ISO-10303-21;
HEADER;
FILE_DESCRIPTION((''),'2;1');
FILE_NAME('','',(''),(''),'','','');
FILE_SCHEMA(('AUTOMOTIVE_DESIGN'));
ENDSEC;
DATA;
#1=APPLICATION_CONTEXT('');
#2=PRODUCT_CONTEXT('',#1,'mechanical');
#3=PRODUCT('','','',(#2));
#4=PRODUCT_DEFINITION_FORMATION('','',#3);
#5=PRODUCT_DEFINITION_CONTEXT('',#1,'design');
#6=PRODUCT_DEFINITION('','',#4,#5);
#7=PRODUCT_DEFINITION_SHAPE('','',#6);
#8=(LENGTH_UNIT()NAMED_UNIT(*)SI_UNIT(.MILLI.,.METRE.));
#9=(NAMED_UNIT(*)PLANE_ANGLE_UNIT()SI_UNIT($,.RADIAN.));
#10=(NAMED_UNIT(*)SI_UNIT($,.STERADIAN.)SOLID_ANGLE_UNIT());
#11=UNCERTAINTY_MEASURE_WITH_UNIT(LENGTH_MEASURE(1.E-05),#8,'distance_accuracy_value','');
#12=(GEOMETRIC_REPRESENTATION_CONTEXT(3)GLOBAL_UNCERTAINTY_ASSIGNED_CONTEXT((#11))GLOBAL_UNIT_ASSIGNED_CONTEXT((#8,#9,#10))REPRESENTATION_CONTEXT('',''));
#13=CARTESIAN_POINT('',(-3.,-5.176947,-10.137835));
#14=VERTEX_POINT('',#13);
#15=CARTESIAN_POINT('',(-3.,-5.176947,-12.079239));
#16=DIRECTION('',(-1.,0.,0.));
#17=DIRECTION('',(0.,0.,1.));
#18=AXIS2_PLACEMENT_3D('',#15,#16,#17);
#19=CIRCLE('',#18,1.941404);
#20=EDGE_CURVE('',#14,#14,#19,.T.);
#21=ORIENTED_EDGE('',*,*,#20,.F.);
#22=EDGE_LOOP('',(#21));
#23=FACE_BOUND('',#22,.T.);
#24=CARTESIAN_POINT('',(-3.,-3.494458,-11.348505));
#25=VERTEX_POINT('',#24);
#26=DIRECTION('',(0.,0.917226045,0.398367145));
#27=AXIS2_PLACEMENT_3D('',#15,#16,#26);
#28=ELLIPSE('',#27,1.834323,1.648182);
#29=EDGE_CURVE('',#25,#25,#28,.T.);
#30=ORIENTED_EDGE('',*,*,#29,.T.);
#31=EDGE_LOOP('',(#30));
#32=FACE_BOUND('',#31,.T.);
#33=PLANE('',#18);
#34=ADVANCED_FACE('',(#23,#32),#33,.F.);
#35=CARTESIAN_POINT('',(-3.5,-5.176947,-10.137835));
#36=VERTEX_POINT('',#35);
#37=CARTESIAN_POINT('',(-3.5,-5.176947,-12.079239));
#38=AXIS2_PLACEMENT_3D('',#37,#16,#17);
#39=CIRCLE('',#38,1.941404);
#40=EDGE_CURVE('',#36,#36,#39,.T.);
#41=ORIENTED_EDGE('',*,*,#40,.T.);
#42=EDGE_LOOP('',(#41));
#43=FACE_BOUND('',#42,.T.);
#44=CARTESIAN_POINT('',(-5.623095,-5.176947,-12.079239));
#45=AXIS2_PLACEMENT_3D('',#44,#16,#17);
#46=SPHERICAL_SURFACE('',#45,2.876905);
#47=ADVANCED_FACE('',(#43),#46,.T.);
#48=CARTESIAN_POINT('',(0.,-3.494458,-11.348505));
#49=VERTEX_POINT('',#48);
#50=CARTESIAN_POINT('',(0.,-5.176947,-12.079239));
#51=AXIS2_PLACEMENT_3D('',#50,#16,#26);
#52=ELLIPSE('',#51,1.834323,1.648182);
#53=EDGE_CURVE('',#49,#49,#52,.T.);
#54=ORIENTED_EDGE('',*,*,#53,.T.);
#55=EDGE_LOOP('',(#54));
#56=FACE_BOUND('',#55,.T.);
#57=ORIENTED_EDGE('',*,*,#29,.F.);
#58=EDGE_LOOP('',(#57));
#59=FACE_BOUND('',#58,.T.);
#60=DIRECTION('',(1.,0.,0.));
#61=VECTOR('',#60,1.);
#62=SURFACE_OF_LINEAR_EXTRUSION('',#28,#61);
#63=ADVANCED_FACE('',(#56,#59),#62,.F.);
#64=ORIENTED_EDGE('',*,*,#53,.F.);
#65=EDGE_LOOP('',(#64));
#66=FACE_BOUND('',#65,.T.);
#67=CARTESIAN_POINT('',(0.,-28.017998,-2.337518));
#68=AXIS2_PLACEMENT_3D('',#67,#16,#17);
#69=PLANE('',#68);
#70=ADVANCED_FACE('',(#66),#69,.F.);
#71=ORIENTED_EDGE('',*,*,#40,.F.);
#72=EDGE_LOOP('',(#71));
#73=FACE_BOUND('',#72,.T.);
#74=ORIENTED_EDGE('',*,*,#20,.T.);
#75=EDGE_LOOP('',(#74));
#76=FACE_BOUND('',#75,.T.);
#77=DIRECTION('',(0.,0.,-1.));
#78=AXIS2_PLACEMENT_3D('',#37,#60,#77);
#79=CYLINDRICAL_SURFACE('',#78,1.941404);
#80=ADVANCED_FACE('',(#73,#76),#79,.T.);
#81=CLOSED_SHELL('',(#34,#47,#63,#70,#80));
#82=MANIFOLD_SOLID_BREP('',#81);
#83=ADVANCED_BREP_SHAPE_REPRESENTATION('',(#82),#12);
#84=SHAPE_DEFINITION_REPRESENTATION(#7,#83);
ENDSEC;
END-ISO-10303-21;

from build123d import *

# Parameters (mm, degrees)
BOSS_EXTRUDE1_DEPTH = 4
CUT_EXTRUDE3_START  = -10
CUT_EXTRUDE3_DEPTH  = 10
CUT_EXTRUDE4_DEPTH  = 10
FILLET4_START       = -1
FILLET4_DEPTH       = 6
SKETCH7_RX          = 1.83432271
SKETCH7_RY          = 1.648181576
BOSS_EXTRUDE2_DEPTH = 3
SKETCH8_R           = 1.941403724
BOSS_EXTRUDE3_DEPTH = 0.5
CUT_EXTRUDE5_DEPTH  = 5
CUT_EXTRUDE6_DEPTH  = 10


with BuildPart() as part:
    # Sketch1 → Boss-Extrude1 (new body)
    with BuildSketch(Plane(origin=(0, 0, 0), x_dir=(0, 0, -1), z_dir=(1, 0, 0))):
        with BuildLine():
            Line((6.442518848, 0), (13.409619329, 0))
            ThreePointArc((13.409619329, 0), (16.945153235, -1.464466094), (18.409619329, -5))
            Line((18.409619329, -5), (18.409619329, -20.34540211))
            ThreePointArc((18.409619329, -20.34540211), (16.945153235, -23.880936016), (13.409619329, -25.34540211))
            Line((13.409619329, -25.34540211), (6.442518848, -25.34540211))
            ThreePointArc((6.442518848, -25.34540211), (2.906984942, -23.880936016), (1.442518848, -20.34540211))
            Line((1.442518848, -20.34540211), (1.442518848, -5))
            ThreePointArc((1.442518848, -5), (2.906984942, -1.464466094), (6.442518848, 0))
        make_face()
    extrude(amount=BOSS_EXTRUDE1_DEPTH)

    # Sketch2 → Cut-Extrude3 (cut)
    with BuildSketch(Plane(origin=(4, 0, 0), x_dir=(0, 0, -1), z_dir=(1, 0, 0)).offset(CUT_EXTRUDE3_START)):
        with BuildLine():
            add(Edge.make_bspline(
                [(2.42884403, -23.286077848), (2.370716158, -22.573896831), (4.185530255, -21.12926271), (4.874517164, -17.962112227), (7.118988975, -13.802662727), (6.544049448, -7.530329658), (1.569055746, -5.349803368), (1.58046752, -3.833613753)],
                knots=[0.531334438, 0.531334438, 0.531334438, 0.531334438, 0.570400737, 0.608236932, 0.680812242, 0.778589658, 0.857107486, 0.857107486, 0.857107486, 0.857107486], degree=3))
            ThreePointArc((1.58046752, -3.833613753), (1.47712578, -4.412742239), (1.442518848, -5))
            Line((1.442518848, -5), (1.442518848, -20.34540211))
            ThreePointArc((1.442518848, -20.34540211), (1.683757797, -21.87974016), (2.384196149, -23.266021372))
            add(Edge.make_bspline(
                [(2.384196149, -23.266021372), (2.399070873, -23.272759012), (2.413953527, -23.279444568), (2.428844038, -23.286077844)],
                knots=[0.998981394, 0.998981394, 0.998981394, 0.998981394, 0.999513034, 0.999513034, 0.999513034, 0.999513034], degree=3))
        make_face()
        with BuildLine():
            Line((13.409619329, 0), (9.46398266, 0))
            add(Edge.make_bspline(
                [(9.46398266, 0), (11.207503001, -0.168664697), (14.40943711, -0.885845558), (18.093070912, -5.600973008), (14.034927819, -11.50687924), (8.23474836, -15.211494887), (7.662204752, -25.591568315), (4.542739971, -24.937885151)],
                knots=[0, 0, 0, 0, 0.077946221, 0.143334379, 0.228662798, 0.345497184, 0.490655992, 0.490655992, 0.490655992, 0.490655992], degree=3))
            add(Edge.make_bspline(
                [(4.54273997, -24.937885153), (5.749127141, -25.532851997), (7.208451258, -25.09277451), (8.521498661, -25.334156754), (8.57622256, -25.34540211)],
                knots=[0.001400322, 0.001400322, 0.001400322, 0.001400322, 0.038459748, 0.040079073, 0.040079073, 0.040079073, 0.040079073], degree=3))
            Line((8.57622256, -25.34540211), (13.409619329, -25.34540211))
            ThreePointArc((13.409619329, -25.34540211), (16.945153235, -23.880936016), (18.409619329, -20.34540211))
            Line((18.409619329, -20.34540211), (18.409619329, -5))
            ThreePointArc((18.409619329, -5), (16.945153235, -1.464466094), (13.409619329, 0))
        make_face()
        with BuildLine():
            ThreePointArc((2.906984942, -1.464466094), (4.529101686, -0.380602337), (6.442518848, 0))
            add(Edge.make_bspline(
                [(6.442518848, 0), (7.443592251, 0.121124965), (8.454170968, 0.097687179), (9.46398266, 0)],
                knots=[0.954855127, 0.954855127, 0.954855127, 0.954855127, 1, 1, 1, 1], degree=3))
            Line((9.46398266, 0), (13.409619329, 0))
            ThreePointArc((13.409619329, 0), (16.945153235, -1.464466094), (18.409619329, -5))
            Line((18.409619329, -5), (18.409619329, -20.34540211))
            ThreePointArc((18.409619329, -20.34540211), (16.945153235, -23.880936016), (13.409619329, -25.34540211))
            Line((13.409619329, -25.34540211), (8.57622256, -25.34540211))
            add(Edge.make_bspline(
                [(8.57622256, -25.34540211), (10.509849295, -25.742748085), (21.004932545, -37.507061135), (40.108036136, 7.046689321), (11.067178354, 5.045725954), (-13.182357735, 4.105959789), (-4.736766595, -20.04051671), (2.384196149, -23.266021372)],
                knots=[0.040079073, 0.040079073, 0.040079073, 0.040079073, 0.09729665, 0.409886449, 0.593670055, 0.744469586, 0.998981394, 0.998981394, 0.998981394, 0.998981394], degree=3))
            ThreePointArc((2.384196149, -23.266021372), (1.683757797, -21.87974016), (1.442518848, -20.34540211))
            Line((1.442518848, -20.34540211), (1.442518848, -5))
            ThreePointArc((1.442518848, -5), (1.47712578, -4.412742239), (1.58046752, -3.833613753))
            add(Edge.make_bspline(
                [(1.58046752, -3.833613753), (1.586363874, -3.050213083), (2.186842654, -2.121305338), (2.906984942, -1.464466094)],
                knots=[0.857107486, 0.857107486, 0.857107486, 0.857107486, 0.897676897, 0.897676897, 0.897676897, 0.897676897], degree=3))
        make_face()
    extrude(amount=CUT_EXTRUDE3_DEPTH, mode=Mode.SUBTRACT)

    # Sketch6 → Cut-Extrude4 (cut)
    with BuildSketch(Plane(origin=(4, 0, 0), x_dir=(0, 0, -1), z_dir=(1, 0, 0))):
        with BuildLine():
            add(Edge.make_bspline(
                [(6.876629539, -24.646378986), (6.348652857, -24.697603605), (5.705170416, -25.181041107), (2.967179599, -24.643973727), (6.798679283, -26.524715176), (10.198220508, -25.437781208), (7.742791771, -24.562343399), (6.876629539, -24.646378986)],
                knots=[0, 0, 0, 0, 0.142115473, 0.262842986, 0.576183637, 0.76685513, 1, 1, 1, 1], degree=3))
        make_face()
    extrude(amount=-CUT_EXTRUDE4_DEPTH, mode=Mode.SUBTRACT)

    # Fillet4: read off the stored shape, not the designer's step
    # Fillet4 outline → Fillet4 (cut)
    with BuildSketch(Plane.YZ.offset(FILLET4_START)):
        with BuildLine():
            ThreePointArc((0, -8.890200058), (-0.027061887, -9.625390775), (-0.108101078, -10.356602363))
            add(Edge.make_bspline(
                [(0, -9.46398266), (-0.028832047, -9.762025236), (-0.064132076, -10.060000995), (-0.108101078, -10.356602363)],
                knots=[0, 0, 0, 0, 0.01332436, 0.01332436, 0.01332436, 0.01332436], degree=3))
            Line((0, -9.46398266), (0, -8.890200058))
        make_face()
    extrude(amount=FILLET4_DEPTH, mode=Mode.SUBTRACT)

    # Sketch7 → Boss-Extrude2 (add)
    with BuildSketch(Plane.ZY):
        with Locations(Location((-12.079238976, -5.176946967), (0, 0, 66.52385958))):
            Ellipse(SKETCH7_RX, SKETCH7_RY)
    extrude(amount=BOSS_EXTRUDE2_DEPTH)

    # Sketch8 → Boss-Extrude3 (add)
    with BuildSketch(Plane.ZY.offset(3)):
        with Locations((-12.079238976, -5.176946967)):
            Circle(SKETCH8_R)
    extrude(amount=BOSS_EXTRUDE3_DEPTH)

    # Dome1: read off the stored shape, not the designer's step
    # Dome1 outline → Dome1 (revolve)
    with BuildSketch(Plane(origin=(0, -5.176946967, -12.079238976), x_dir=(0, 1, 0), z_dir=(0, 0, -1))):
        with BuildLine():
            Line((0, -3.499999998), (0, -8.5))
            ThreePointArc((0, -8.5), (2.681839314, -6.664401723), (1.941403723, -3.499999999))
            Line((1.941403723, -3.499999999), (0, -3.499999998))
        make_face()
    revolve(axis=Axis((0, -5.176946967, -12.079238976), (1, 0, 0)))

    # Sketch9 → Cut-Extrude5 (cut)
    with BuildSketch(Plane.ZY):
        with BuildLine():
            Line((-4.325838527, -20.140987675), (-2.486204677, -24.505449301))
            add(Edge.make_bspline(
                [(-2.486204677, -24.505449301), (3.73593799, -24.171685926), (-2.121854058, -16.126748366), (-4.325838527, -20.140987675)],
                knots=[0, 0, 0, 0, 1, 1, 1, 1], degree=3))
        make_face()
    extrude(amount=-CUT_EXTRUDE5_DEPTH, mode=Mode.SUBTRACT)

    # Sketch10 → Cut-Extrude6 (cut)
    with BuildSketch(Plane.ZY):
        with BuildLine():
            add(Edge.make_bspline(
                [(-20.598699556, -6.394321891), (-16.755827274, 0.910133144), (9.164509457, 10.912523184), (-0.036389797, -25.461480915), (-14.467778879, -53.72221039), (-27.813040504, -20.107197366), (-20.598699556, -6.394321891)],
                knots=[0, 0, 0, 0, 0.192062033, 0.555519923, 0.639436107, 1, 1, 1, 1], degree=3))
        make_face()
    extrude(amount=-CUT_EXTRUDE6_DEPTH, mode=Mode.SUBTRACT)


solid = part.part
